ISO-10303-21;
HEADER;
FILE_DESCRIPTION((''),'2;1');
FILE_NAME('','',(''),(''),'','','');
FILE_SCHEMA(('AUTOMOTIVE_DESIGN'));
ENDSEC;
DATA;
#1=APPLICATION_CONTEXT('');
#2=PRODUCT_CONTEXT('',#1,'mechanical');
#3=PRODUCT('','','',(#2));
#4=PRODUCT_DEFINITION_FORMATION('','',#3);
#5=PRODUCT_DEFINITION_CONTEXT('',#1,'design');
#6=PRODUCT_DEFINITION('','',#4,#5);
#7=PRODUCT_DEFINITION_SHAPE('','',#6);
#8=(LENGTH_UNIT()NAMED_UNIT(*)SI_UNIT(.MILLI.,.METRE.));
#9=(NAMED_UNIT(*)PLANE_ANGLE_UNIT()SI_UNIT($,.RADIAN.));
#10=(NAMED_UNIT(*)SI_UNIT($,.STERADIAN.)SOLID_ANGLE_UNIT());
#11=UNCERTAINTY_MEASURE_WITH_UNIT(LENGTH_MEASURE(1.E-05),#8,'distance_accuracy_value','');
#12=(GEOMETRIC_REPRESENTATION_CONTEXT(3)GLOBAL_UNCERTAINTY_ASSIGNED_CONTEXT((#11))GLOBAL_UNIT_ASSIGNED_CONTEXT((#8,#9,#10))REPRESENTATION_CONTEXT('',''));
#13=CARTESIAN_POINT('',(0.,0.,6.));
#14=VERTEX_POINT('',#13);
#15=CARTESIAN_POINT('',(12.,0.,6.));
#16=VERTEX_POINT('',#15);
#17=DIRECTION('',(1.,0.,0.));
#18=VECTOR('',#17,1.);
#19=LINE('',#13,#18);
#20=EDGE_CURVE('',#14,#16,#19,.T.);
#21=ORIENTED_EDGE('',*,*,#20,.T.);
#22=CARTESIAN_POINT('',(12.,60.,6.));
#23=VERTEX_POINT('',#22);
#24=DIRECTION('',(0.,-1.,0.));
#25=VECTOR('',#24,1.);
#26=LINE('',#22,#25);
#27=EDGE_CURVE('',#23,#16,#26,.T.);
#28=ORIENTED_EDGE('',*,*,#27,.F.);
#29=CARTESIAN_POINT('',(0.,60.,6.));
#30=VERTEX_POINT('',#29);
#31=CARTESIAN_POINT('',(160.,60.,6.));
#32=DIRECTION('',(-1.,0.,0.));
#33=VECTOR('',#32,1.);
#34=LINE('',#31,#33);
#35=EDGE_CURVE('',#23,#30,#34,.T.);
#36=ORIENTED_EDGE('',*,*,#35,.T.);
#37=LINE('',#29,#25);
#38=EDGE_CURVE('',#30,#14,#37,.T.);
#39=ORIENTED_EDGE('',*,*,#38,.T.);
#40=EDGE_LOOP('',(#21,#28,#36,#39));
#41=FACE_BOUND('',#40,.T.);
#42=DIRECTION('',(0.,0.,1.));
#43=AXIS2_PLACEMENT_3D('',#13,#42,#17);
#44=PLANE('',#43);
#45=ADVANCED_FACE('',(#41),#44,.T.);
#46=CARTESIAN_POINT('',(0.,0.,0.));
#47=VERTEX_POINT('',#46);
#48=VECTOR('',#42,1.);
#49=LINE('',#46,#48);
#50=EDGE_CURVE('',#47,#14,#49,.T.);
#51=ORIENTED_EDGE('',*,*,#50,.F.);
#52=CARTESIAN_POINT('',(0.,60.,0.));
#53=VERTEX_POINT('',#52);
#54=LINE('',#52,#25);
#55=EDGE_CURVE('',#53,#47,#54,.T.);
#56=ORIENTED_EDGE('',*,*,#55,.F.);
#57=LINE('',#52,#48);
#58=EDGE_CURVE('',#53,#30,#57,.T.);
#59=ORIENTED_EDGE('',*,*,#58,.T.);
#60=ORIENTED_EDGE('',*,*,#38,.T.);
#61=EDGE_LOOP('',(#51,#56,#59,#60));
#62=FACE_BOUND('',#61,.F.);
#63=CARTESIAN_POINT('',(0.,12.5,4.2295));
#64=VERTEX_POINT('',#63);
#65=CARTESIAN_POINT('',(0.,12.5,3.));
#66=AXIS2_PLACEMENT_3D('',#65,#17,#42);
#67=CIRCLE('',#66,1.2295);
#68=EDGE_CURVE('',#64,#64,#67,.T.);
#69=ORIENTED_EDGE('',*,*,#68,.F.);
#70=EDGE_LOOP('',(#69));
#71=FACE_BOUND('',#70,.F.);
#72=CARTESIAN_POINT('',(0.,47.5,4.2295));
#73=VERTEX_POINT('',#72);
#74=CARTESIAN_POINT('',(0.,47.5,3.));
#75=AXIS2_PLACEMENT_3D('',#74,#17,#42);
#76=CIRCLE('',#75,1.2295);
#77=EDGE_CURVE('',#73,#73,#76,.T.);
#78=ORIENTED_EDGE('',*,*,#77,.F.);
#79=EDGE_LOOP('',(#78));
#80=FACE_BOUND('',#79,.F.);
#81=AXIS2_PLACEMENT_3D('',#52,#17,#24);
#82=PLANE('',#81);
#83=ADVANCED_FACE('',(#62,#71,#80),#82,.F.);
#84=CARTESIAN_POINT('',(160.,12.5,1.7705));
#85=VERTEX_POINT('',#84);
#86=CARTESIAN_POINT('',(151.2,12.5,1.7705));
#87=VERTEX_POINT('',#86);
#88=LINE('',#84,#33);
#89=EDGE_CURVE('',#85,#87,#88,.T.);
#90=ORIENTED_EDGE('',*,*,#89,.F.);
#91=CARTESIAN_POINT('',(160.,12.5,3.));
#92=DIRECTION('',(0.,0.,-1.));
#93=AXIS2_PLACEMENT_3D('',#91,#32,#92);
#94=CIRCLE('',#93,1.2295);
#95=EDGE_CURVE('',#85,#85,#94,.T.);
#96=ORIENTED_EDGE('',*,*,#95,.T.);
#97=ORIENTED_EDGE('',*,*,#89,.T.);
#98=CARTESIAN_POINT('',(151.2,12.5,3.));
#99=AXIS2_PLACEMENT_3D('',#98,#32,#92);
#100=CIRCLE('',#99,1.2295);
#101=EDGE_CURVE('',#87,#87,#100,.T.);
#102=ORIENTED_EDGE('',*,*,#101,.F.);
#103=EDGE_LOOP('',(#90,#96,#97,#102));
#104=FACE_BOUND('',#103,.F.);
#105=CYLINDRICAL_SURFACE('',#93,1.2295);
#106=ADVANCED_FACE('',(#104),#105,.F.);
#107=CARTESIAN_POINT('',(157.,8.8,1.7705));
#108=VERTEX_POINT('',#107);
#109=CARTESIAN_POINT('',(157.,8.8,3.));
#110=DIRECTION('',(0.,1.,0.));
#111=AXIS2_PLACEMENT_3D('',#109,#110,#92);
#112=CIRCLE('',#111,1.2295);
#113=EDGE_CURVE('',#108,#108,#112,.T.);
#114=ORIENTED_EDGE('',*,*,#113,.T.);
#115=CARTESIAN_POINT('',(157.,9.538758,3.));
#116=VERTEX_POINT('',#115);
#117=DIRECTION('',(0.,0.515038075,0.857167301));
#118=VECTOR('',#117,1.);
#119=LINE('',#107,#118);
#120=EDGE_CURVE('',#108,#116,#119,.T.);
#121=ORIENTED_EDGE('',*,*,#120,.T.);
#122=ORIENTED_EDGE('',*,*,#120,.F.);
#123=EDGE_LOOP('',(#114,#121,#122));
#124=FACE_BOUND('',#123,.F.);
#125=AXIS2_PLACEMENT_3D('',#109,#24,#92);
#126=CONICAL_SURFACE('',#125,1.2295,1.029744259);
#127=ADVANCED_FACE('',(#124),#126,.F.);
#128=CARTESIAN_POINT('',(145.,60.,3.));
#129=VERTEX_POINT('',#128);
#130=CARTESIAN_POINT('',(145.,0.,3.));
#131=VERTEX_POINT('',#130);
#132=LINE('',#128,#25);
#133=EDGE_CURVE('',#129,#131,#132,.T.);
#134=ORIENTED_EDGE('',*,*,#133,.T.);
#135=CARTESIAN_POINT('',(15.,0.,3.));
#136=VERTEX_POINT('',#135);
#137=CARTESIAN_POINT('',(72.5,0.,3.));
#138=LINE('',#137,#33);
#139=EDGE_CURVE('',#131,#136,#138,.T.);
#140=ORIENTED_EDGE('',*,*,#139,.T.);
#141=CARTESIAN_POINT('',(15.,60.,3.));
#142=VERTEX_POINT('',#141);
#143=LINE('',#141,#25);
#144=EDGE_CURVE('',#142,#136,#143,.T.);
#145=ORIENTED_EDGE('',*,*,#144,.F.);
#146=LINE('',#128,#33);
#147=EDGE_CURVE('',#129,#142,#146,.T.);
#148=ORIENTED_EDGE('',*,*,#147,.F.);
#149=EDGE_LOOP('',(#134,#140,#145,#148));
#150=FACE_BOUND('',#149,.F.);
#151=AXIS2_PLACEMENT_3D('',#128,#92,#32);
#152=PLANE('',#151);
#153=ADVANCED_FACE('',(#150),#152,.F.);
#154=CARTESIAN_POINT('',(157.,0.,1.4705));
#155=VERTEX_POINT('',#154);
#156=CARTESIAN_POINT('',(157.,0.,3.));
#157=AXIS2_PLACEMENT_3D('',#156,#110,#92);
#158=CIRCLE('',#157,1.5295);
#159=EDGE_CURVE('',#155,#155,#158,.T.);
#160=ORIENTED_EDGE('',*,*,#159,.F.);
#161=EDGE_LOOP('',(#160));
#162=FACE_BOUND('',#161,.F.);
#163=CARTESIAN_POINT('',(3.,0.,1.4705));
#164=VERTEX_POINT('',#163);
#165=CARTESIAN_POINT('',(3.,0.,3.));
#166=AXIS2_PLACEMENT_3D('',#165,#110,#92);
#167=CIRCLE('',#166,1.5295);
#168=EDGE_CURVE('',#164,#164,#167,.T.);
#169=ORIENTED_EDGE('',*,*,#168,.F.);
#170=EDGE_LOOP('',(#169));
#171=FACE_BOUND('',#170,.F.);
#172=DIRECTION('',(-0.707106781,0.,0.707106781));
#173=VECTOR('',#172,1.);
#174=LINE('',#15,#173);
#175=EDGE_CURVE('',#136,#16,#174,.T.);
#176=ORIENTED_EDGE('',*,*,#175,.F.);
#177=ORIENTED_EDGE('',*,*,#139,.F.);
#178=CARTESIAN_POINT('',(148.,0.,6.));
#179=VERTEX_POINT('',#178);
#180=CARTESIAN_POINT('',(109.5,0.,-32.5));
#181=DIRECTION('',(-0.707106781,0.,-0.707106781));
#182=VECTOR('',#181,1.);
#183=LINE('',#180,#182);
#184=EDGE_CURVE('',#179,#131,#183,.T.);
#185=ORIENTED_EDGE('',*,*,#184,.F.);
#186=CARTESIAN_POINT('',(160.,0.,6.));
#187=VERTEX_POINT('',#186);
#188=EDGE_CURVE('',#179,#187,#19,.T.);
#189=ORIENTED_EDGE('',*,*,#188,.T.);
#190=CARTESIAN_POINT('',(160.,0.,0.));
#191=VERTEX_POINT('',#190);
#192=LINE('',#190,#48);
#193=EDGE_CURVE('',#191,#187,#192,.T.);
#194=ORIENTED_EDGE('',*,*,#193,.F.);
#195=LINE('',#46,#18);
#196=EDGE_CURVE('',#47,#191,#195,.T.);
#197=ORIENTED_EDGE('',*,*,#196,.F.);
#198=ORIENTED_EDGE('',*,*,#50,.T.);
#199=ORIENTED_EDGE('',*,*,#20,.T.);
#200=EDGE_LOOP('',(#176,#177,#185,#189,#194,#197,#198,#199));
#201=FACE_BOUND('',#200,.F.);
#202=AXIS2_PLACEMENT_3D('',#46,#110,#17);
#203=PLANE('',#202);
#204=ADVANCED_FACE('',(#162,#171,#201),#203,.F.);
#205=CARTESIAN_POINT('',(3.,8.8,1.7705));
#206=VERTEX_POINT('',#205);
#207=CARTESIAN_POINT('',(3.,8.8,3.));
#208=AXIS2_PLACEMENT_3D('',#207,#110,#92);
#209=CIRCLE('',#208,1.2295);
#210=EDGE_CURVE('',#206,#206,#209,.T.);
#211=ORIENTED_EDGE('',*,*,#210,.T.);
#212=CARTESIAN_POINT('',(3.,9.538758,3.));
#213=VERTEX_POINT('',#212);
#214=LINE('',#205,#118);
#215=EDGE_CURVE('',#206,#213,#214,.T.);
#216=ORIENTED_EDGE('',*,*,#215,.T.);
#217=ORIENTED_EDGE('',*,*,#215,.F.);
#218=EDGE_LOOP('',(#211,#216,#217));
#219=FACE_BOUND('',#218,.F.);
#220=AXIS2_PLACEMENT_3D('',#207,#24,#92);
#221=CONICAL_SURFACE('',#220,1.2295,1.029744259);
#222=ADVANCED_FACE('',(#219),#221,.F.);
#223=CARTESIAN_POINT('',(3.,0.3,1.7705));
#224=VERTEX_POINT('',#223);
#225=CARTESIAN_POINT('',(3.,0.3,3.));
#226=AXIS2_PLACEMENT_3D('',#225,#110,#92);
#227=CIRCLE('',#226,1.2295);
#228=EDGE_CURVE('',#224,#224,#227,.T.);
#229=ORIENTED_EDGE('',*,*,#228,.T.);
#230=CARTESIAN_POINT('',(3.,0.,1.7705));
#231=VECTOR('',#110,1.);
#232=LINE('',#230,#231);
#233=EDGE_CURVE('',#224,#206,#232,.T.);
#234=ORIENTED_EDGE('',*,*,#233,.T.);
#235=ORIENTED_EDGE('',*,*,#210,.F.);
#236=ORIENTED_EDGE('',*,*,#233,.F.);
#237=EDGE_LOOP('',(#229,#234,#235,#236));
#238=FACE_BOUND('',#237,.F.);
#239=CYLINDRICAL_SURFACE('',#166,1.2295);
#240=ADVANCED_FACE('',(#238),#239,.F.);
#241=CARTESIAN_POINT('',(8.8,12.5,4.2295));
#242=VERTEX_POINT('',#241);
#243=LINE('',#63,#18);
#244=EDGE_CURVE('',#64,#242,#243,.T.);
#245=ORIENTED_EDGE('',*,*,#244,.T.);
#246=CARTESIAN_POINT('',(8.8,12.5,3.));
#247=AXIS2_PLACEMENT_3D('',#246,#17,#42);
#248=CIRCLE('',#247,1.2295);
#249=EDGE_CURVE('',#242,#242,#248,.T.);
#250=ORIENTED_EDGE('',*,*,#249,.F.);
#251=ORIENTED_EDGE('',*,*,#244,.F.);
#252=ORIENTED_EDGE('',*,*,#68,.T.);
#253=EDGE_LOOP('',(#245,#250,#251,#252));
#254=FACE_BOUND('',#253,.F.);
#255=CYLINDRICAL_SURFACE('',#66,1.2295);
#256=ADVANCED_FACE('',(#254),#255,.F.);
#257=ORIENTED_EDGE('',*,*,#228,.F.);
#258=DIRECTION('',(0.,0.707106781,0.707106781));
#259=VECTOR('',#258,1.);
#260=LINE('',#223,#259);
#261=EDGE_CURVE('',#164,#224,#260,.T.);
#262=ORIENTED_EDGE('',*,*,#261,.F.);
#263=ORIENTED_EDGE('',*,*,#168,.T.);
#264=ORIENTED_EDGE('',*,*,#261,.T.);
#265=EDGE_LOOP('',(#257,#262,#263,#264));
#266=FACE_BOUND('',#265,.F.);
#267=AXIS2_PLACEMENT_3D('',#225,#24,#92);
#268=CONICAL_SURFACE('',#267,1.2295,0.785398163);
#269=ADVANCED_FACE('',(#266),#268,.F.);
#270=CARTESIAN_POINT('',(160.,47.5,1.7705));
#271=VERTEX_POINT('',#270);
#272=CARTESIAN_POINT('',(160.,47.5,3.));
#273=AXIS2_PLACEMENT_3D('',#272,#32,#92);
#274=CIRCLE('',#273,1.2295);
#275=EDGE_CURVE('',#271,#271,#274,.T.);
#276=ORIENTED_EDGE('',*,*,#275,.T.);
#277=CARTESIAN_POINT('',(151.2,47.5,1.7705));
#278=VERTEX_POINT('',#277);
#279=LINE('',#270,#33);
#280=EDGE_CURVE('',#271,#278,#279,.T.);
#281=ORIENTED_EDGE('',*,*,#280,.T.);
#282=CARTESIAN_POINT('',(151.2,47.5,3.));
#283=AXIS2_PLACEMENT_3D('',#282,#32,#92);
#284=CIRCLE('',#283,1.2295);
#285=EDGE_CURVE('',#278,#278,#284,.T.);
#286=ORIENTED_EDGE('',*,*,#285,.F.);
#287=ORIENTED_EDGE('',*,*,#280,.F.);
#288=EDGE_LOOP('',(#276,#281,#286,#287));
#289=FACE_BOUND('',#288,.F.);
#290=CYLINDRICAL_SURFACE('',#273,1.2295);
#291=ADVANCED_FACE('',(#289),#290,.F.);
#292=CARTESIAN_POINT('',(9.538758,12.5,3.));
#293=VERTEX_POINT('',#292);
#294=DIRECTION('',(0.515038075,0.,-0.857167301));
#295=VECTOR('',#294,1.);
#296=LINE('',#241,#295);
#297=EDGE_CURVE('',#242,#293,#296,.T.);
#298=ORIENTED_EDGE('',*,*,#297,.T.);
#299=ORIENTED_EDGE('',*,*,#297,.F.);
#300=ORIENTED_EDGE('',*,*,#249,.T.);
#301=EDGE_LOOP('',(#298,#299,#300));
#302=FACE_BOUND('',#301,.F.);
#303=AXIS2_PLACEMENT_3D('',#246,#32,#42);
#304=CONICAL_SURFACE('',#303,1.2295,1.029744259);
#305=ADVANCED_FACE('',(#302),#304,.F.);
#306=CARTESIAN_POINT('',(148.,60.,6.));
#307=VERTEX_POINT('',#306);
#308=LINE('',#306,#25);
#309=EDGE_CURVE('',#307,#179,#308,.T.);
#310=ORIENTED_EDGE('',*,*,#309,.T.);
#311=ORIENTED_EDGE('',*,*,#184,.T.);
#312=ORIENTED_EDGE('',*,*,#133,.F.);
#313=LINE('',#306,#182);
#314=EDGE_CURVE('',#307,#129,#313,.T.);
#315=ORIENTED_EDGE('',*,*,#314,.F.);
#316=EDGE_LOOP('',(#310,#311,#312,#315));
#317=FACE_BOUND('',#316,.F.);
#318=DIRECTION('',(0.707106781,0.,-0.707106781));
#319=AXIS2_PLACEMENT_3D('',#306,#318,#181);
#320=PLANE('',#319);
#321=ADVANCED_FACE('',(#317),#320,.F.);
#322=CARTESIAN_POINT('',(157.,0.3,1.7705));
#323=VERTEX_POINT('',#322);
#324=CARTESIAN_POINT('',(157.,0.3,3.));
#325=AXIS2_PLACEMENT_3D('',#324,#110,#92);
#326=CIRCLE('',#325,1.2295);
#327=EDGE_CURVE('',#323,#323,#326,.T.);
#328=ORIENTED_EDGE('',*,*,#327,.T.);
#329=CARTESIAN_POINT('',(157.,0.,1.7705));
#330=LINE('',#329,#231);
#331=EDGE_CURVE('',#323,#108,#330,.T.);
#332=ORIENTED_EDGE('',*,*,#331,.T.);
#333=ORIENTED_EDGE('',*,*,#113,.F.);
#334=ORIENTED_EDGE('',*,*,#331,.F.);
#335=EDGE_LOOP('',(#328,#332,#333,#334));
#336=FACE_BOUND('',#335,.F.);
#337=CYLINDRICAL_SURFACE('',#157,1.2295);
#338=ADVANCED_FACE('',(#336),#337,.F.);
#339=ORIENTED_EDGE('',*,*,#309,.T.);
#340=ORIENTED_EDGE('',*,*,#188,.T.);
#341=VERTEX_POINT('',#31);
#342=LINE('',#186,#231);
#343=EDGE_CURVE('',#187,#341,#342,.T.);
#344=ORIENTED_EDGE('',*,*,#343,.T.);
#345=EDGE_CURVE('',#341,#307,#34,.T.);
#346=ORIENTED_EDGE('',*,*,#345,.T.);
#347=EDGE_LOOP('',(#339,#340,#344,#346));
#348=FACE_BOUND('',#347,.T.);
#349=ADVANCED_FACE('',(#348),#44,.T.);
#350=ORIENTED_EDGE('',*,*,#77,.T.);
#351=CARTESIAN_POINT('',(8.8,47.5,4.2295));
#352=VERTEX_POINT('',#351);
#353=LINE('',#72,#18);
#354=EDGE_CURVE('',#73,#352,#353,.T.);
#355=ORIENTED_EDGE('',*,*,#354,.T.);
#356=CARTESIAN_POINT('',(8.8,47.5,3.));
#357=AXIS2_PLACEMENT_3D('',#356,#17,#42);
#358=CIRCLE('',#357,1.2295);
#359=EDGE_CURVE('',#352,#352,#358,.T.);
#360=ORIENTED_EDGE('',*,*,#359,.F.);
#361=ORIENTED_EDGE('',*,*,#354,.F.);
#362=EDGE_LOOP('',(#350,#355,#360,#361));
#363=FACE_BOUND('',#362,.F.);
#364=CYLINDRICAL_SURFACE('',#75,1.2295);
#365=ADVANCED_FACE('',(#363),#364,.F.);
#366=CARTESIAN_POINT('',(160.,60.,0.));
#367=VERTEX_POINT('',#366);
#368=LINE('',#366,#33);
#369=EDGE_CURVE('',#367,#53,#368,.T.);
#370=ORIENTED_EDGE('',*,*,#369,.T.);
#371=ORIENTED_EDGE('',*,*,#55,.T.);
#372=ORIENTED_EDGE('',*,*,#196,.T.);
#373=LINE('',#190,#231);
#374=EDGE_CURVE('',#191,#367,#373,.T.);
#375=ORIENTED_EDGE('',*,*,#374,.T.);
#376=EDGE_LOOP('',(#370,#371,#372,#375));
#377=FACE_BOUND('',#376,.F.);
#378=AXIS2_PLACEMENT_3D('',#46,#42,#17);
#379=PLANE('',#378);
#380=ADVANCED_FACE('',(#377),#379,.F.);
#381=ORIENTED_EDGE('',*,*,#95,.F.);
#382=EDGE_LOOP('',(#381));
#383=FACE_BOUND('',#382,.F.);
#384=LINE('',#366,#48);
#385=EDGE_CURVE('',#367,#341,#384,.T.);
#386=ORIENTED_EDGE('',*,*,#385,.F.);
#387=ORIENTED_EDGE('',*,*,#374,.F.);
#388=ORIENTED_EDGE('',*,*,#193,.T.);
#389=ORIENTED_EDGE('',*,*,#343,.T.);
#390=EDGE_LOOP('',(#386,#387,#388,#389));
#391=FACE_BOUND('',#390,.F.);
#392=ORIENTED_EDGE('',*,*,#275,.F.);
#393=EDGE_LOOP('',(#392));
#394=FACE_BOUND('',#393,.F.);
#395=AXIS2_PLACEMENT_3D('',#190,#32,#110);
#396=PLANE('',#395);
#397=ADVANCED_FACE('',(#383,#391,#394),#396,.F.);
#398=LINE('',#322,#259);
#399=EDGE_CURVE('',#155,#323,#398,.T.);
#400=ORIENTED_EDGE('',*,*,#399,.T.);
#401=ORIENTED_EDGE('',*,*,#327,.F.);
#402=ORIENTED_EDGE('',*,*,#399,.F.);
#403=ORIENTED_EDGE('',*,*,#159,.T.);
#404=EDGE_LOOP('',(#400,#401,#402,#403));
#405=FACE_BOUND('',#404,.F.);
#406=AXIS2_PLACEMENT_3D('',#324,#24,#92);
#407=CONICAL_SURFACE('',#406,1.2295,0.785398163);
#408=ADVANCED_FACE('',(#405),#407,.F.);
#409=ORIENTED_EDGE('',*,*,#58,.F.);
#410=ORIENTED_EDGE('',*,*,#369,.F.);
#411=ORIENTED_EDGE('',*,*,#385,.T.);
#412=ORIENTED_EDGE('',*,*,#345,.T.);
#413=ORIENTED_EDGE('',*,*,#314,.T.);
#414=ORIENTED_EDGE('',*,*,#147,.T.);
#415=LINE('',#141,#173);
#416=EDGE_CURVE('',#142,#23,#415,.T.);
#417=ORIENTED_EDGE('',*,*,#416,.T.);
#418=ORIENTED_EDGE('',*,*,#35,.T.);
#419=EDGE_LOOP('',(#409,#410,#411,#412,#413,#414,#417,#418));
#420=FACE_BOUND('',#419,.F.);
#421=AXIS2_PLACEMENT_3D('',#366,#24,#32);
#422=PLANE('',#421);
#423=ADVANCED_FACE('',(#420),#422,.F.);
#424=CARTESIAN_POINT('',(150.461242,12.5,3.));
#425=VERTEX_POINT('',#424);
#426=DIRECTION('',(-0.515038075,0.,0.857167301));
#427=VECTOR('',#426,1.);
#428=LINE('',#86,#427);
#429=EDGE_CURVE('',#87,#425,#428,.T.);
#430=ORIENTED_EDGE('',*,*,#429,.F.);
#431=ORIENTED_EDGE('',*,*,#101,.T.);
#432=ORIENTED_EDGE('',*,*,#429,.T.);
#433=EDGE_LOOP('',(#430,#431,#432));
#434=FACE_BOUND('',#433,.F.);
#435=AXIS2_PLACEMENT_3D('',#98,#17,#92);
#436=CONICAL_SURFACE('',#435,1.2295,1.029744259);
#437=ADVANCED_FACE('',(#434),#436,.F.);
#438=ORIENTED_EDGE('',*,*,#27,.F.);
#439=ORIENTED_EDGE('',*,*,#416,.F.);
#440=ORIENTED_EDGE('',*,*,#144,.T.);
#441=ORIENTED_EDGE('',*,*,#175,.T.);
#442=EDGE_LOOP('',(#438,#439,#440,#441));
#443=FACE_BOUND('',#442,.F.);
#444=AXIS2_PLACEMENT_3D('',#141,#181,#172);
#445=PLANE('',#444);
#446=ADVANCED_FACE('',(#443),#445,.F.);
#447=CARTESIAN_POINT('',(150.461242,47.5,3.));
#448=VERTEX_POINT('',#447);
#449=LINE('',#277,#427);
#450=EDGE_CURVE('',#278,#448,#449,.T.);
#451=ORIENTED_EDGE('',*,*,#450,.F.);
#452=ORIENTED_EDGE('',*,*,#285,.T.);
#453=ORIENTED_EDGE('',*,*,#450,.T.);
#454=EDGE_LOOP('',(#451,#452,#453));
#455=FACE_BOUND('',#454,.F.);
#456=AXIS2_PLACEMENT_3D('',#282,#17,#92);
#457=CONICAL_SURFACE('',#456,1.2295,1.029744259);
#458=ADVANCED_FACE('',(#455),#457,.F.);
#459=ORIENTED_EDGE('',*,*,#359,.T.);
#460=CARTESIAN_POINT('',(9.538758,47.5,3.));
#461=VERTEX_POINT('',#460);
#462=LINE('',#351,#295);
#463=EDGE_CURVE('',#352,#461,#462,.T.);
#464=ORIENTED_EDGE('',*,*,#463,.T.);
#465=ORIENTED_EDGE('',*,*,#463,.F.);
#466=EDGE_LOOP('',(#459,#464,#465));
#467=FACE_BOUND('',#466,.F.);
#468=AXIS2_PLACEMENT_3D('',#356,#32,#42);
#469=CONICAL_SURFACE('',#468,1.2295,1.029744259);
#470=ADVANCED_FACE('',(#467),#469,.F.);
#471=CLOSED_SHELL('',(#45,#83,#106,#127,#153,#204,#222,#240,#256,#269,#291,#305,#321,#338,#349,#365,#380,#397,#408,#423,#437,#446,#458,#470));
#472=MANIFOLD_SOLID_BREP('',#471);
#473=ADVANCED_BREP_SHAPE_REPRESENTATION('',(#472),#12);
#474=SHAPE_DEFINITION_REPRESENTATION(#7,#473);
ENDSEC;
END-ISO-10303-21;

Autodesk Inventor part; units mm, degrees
ref_plane "YZ Plane" through (0, 0, 0) normal (1, 0, 0) x (0, 1, 0)
ref_plane "XZ Plane" through (0, 0, 0) normal (0, 1, 0) x (-1, 0, 0)
ref_plane "XY Plane" through (0, 0, 0) normal (0, 0, 1) x (1, 0, 0)
sketch "Sketch1" plane through (0, 0, 0) normal (0, 0, 1) x (1, 0, 0)
  line L0 (0, 0) -> (160, 0)
  line L1 (160, 0) -> (160, 60)
  line L2 (160, 60) -> (0, 60)
  line L3 (0, 60) -> (0, 0)
  dimension "d0" = 160
  dimension "d1" = 60
extrude "Extrusion1" add sketch "Sketch1" along normal blind 6
sketch "Sketch2" plane through (0, 0, 0) normal (0, -1, 0) x (1, 0, 0)
  line L0 (3, 3) -> (157, 3) construction
  line L1 (160, 0) -> (0, 0) construction
  line L2 (0, 6) -> (160, 6) construction
  line L3 (160, 0) -> (160, 6) construction
  line L4 (0, 0) -> (0, 6) construction
  point P0 (0, 3)
  dimension "d4" = 3
  dimension "d5" = 6
  dimension "d6" = 3
  dimension "d7" = 3
hole "Hole1" at (3, 0, 3) at (157, 0, 3) direction (0, 1, 0) diameter 2.459 depth 8.8 tip angle 118 thread size "M3x0.5" class "6H" standard "ISO Metric profile"
chamfer "Chamfer1" distance 0.3 angle 45 2 edges at (3, 0, 4.2295) (157, 0, 4.2295)
sketch "Sketch3" plane through (0, 60, 0) normal (0, 1, 0) x (1, 0, 0)
  line L0 (160, -6) -> (0, -6) projected
  line L1 (148, -6) -> (145, -3)
  line L2 (148, -6) -> (152.2426, -6) construction
  line L3 (145, -3) -> (15, -3)
  line L4 (160, 0) -> (0, 0) projected
  line L5 (15, -3) -> (12, -6)
  line L6 (12, -6) -> (148, -6)
  line L7 (160, 0) -> (160, -6) projected
  line L8 (0, 0) -> (0, -6) projected
  point P0 (12, -6)
  point P1 (0, -3)
  dimension "d18" = 135
  dimension "d19" = 3
  dimension "d22" = 15
  dimension "d23" = 130
  dimension "d24" = 15
extrude "Extrusion2" cut sketch "Sketch3" against normal through all contours L0 L5 L3 L1
sketch "Sketch6" plane through (160, 0, 0) normal (1, 0, 0) x (0, 0, -1)
  line L0 (-3, 60) -> (-3, 0) projected
  circle A0 centre (-3, 12.5) radius 1.5
  circle A1 centre (-3, 47.5) radius 1.5
  line L1 (0, 0) -> (-6, 0) projected
  line L2 (0, 60) -> (-6, 60) projected
  dimension "d34" = 3
  dimension "d35" = 3
  dimension "d36" = 35
  dimension "d37" = 12.5
  dimension "d38" = 60
hole "Hole2" at (160, 12.5, 3) at (160, 47.5, 3) direction (-1, 0, 0) diameter 2.459 depth 8.8 tip angle 118 thread size "M3x0.5" class "6H" standard "ISO Metric profile"
sketch "Sketch7" plane through (0, 0, 0) normal (-1, 0, 0) x (0, 0, 1)
  line L0 (3, 60) -> (3, 0) projected
  circle A0 centre (3, 12.5) radius 1.5
  circle A1 centre (3, 47.5) radius 1.5
  line L1 (0, 60) -> (6, 60) projected
  line L2 (0, 0) -> (6, 0) projected
  dimension "d46" = 3
  dimension "d47" = 3
  dimension "d48" = 35
  dimension "d49" = 60
  dimension "d50" = 12.5
hole "Hole3" at (0, 47.5, 3) at (0, 12.5, 3) direction (1, 0, 0) diameter 2.459 depth 8.8 tip angle 118 thread size "M3x0.5" class "6H" standard "ISO Metric profile"
equation "\"d4\" = 0.5 * d5"
equation "\"d7\" = d6"
equation "\"d22\" = d24"
equation "\"d37\" = -0.5 * d36 + 0.5 * d38"
equation "\"d50\" = -0.5 * d48 + 0.5 * d49"
properties part number "Prawa ściana"
